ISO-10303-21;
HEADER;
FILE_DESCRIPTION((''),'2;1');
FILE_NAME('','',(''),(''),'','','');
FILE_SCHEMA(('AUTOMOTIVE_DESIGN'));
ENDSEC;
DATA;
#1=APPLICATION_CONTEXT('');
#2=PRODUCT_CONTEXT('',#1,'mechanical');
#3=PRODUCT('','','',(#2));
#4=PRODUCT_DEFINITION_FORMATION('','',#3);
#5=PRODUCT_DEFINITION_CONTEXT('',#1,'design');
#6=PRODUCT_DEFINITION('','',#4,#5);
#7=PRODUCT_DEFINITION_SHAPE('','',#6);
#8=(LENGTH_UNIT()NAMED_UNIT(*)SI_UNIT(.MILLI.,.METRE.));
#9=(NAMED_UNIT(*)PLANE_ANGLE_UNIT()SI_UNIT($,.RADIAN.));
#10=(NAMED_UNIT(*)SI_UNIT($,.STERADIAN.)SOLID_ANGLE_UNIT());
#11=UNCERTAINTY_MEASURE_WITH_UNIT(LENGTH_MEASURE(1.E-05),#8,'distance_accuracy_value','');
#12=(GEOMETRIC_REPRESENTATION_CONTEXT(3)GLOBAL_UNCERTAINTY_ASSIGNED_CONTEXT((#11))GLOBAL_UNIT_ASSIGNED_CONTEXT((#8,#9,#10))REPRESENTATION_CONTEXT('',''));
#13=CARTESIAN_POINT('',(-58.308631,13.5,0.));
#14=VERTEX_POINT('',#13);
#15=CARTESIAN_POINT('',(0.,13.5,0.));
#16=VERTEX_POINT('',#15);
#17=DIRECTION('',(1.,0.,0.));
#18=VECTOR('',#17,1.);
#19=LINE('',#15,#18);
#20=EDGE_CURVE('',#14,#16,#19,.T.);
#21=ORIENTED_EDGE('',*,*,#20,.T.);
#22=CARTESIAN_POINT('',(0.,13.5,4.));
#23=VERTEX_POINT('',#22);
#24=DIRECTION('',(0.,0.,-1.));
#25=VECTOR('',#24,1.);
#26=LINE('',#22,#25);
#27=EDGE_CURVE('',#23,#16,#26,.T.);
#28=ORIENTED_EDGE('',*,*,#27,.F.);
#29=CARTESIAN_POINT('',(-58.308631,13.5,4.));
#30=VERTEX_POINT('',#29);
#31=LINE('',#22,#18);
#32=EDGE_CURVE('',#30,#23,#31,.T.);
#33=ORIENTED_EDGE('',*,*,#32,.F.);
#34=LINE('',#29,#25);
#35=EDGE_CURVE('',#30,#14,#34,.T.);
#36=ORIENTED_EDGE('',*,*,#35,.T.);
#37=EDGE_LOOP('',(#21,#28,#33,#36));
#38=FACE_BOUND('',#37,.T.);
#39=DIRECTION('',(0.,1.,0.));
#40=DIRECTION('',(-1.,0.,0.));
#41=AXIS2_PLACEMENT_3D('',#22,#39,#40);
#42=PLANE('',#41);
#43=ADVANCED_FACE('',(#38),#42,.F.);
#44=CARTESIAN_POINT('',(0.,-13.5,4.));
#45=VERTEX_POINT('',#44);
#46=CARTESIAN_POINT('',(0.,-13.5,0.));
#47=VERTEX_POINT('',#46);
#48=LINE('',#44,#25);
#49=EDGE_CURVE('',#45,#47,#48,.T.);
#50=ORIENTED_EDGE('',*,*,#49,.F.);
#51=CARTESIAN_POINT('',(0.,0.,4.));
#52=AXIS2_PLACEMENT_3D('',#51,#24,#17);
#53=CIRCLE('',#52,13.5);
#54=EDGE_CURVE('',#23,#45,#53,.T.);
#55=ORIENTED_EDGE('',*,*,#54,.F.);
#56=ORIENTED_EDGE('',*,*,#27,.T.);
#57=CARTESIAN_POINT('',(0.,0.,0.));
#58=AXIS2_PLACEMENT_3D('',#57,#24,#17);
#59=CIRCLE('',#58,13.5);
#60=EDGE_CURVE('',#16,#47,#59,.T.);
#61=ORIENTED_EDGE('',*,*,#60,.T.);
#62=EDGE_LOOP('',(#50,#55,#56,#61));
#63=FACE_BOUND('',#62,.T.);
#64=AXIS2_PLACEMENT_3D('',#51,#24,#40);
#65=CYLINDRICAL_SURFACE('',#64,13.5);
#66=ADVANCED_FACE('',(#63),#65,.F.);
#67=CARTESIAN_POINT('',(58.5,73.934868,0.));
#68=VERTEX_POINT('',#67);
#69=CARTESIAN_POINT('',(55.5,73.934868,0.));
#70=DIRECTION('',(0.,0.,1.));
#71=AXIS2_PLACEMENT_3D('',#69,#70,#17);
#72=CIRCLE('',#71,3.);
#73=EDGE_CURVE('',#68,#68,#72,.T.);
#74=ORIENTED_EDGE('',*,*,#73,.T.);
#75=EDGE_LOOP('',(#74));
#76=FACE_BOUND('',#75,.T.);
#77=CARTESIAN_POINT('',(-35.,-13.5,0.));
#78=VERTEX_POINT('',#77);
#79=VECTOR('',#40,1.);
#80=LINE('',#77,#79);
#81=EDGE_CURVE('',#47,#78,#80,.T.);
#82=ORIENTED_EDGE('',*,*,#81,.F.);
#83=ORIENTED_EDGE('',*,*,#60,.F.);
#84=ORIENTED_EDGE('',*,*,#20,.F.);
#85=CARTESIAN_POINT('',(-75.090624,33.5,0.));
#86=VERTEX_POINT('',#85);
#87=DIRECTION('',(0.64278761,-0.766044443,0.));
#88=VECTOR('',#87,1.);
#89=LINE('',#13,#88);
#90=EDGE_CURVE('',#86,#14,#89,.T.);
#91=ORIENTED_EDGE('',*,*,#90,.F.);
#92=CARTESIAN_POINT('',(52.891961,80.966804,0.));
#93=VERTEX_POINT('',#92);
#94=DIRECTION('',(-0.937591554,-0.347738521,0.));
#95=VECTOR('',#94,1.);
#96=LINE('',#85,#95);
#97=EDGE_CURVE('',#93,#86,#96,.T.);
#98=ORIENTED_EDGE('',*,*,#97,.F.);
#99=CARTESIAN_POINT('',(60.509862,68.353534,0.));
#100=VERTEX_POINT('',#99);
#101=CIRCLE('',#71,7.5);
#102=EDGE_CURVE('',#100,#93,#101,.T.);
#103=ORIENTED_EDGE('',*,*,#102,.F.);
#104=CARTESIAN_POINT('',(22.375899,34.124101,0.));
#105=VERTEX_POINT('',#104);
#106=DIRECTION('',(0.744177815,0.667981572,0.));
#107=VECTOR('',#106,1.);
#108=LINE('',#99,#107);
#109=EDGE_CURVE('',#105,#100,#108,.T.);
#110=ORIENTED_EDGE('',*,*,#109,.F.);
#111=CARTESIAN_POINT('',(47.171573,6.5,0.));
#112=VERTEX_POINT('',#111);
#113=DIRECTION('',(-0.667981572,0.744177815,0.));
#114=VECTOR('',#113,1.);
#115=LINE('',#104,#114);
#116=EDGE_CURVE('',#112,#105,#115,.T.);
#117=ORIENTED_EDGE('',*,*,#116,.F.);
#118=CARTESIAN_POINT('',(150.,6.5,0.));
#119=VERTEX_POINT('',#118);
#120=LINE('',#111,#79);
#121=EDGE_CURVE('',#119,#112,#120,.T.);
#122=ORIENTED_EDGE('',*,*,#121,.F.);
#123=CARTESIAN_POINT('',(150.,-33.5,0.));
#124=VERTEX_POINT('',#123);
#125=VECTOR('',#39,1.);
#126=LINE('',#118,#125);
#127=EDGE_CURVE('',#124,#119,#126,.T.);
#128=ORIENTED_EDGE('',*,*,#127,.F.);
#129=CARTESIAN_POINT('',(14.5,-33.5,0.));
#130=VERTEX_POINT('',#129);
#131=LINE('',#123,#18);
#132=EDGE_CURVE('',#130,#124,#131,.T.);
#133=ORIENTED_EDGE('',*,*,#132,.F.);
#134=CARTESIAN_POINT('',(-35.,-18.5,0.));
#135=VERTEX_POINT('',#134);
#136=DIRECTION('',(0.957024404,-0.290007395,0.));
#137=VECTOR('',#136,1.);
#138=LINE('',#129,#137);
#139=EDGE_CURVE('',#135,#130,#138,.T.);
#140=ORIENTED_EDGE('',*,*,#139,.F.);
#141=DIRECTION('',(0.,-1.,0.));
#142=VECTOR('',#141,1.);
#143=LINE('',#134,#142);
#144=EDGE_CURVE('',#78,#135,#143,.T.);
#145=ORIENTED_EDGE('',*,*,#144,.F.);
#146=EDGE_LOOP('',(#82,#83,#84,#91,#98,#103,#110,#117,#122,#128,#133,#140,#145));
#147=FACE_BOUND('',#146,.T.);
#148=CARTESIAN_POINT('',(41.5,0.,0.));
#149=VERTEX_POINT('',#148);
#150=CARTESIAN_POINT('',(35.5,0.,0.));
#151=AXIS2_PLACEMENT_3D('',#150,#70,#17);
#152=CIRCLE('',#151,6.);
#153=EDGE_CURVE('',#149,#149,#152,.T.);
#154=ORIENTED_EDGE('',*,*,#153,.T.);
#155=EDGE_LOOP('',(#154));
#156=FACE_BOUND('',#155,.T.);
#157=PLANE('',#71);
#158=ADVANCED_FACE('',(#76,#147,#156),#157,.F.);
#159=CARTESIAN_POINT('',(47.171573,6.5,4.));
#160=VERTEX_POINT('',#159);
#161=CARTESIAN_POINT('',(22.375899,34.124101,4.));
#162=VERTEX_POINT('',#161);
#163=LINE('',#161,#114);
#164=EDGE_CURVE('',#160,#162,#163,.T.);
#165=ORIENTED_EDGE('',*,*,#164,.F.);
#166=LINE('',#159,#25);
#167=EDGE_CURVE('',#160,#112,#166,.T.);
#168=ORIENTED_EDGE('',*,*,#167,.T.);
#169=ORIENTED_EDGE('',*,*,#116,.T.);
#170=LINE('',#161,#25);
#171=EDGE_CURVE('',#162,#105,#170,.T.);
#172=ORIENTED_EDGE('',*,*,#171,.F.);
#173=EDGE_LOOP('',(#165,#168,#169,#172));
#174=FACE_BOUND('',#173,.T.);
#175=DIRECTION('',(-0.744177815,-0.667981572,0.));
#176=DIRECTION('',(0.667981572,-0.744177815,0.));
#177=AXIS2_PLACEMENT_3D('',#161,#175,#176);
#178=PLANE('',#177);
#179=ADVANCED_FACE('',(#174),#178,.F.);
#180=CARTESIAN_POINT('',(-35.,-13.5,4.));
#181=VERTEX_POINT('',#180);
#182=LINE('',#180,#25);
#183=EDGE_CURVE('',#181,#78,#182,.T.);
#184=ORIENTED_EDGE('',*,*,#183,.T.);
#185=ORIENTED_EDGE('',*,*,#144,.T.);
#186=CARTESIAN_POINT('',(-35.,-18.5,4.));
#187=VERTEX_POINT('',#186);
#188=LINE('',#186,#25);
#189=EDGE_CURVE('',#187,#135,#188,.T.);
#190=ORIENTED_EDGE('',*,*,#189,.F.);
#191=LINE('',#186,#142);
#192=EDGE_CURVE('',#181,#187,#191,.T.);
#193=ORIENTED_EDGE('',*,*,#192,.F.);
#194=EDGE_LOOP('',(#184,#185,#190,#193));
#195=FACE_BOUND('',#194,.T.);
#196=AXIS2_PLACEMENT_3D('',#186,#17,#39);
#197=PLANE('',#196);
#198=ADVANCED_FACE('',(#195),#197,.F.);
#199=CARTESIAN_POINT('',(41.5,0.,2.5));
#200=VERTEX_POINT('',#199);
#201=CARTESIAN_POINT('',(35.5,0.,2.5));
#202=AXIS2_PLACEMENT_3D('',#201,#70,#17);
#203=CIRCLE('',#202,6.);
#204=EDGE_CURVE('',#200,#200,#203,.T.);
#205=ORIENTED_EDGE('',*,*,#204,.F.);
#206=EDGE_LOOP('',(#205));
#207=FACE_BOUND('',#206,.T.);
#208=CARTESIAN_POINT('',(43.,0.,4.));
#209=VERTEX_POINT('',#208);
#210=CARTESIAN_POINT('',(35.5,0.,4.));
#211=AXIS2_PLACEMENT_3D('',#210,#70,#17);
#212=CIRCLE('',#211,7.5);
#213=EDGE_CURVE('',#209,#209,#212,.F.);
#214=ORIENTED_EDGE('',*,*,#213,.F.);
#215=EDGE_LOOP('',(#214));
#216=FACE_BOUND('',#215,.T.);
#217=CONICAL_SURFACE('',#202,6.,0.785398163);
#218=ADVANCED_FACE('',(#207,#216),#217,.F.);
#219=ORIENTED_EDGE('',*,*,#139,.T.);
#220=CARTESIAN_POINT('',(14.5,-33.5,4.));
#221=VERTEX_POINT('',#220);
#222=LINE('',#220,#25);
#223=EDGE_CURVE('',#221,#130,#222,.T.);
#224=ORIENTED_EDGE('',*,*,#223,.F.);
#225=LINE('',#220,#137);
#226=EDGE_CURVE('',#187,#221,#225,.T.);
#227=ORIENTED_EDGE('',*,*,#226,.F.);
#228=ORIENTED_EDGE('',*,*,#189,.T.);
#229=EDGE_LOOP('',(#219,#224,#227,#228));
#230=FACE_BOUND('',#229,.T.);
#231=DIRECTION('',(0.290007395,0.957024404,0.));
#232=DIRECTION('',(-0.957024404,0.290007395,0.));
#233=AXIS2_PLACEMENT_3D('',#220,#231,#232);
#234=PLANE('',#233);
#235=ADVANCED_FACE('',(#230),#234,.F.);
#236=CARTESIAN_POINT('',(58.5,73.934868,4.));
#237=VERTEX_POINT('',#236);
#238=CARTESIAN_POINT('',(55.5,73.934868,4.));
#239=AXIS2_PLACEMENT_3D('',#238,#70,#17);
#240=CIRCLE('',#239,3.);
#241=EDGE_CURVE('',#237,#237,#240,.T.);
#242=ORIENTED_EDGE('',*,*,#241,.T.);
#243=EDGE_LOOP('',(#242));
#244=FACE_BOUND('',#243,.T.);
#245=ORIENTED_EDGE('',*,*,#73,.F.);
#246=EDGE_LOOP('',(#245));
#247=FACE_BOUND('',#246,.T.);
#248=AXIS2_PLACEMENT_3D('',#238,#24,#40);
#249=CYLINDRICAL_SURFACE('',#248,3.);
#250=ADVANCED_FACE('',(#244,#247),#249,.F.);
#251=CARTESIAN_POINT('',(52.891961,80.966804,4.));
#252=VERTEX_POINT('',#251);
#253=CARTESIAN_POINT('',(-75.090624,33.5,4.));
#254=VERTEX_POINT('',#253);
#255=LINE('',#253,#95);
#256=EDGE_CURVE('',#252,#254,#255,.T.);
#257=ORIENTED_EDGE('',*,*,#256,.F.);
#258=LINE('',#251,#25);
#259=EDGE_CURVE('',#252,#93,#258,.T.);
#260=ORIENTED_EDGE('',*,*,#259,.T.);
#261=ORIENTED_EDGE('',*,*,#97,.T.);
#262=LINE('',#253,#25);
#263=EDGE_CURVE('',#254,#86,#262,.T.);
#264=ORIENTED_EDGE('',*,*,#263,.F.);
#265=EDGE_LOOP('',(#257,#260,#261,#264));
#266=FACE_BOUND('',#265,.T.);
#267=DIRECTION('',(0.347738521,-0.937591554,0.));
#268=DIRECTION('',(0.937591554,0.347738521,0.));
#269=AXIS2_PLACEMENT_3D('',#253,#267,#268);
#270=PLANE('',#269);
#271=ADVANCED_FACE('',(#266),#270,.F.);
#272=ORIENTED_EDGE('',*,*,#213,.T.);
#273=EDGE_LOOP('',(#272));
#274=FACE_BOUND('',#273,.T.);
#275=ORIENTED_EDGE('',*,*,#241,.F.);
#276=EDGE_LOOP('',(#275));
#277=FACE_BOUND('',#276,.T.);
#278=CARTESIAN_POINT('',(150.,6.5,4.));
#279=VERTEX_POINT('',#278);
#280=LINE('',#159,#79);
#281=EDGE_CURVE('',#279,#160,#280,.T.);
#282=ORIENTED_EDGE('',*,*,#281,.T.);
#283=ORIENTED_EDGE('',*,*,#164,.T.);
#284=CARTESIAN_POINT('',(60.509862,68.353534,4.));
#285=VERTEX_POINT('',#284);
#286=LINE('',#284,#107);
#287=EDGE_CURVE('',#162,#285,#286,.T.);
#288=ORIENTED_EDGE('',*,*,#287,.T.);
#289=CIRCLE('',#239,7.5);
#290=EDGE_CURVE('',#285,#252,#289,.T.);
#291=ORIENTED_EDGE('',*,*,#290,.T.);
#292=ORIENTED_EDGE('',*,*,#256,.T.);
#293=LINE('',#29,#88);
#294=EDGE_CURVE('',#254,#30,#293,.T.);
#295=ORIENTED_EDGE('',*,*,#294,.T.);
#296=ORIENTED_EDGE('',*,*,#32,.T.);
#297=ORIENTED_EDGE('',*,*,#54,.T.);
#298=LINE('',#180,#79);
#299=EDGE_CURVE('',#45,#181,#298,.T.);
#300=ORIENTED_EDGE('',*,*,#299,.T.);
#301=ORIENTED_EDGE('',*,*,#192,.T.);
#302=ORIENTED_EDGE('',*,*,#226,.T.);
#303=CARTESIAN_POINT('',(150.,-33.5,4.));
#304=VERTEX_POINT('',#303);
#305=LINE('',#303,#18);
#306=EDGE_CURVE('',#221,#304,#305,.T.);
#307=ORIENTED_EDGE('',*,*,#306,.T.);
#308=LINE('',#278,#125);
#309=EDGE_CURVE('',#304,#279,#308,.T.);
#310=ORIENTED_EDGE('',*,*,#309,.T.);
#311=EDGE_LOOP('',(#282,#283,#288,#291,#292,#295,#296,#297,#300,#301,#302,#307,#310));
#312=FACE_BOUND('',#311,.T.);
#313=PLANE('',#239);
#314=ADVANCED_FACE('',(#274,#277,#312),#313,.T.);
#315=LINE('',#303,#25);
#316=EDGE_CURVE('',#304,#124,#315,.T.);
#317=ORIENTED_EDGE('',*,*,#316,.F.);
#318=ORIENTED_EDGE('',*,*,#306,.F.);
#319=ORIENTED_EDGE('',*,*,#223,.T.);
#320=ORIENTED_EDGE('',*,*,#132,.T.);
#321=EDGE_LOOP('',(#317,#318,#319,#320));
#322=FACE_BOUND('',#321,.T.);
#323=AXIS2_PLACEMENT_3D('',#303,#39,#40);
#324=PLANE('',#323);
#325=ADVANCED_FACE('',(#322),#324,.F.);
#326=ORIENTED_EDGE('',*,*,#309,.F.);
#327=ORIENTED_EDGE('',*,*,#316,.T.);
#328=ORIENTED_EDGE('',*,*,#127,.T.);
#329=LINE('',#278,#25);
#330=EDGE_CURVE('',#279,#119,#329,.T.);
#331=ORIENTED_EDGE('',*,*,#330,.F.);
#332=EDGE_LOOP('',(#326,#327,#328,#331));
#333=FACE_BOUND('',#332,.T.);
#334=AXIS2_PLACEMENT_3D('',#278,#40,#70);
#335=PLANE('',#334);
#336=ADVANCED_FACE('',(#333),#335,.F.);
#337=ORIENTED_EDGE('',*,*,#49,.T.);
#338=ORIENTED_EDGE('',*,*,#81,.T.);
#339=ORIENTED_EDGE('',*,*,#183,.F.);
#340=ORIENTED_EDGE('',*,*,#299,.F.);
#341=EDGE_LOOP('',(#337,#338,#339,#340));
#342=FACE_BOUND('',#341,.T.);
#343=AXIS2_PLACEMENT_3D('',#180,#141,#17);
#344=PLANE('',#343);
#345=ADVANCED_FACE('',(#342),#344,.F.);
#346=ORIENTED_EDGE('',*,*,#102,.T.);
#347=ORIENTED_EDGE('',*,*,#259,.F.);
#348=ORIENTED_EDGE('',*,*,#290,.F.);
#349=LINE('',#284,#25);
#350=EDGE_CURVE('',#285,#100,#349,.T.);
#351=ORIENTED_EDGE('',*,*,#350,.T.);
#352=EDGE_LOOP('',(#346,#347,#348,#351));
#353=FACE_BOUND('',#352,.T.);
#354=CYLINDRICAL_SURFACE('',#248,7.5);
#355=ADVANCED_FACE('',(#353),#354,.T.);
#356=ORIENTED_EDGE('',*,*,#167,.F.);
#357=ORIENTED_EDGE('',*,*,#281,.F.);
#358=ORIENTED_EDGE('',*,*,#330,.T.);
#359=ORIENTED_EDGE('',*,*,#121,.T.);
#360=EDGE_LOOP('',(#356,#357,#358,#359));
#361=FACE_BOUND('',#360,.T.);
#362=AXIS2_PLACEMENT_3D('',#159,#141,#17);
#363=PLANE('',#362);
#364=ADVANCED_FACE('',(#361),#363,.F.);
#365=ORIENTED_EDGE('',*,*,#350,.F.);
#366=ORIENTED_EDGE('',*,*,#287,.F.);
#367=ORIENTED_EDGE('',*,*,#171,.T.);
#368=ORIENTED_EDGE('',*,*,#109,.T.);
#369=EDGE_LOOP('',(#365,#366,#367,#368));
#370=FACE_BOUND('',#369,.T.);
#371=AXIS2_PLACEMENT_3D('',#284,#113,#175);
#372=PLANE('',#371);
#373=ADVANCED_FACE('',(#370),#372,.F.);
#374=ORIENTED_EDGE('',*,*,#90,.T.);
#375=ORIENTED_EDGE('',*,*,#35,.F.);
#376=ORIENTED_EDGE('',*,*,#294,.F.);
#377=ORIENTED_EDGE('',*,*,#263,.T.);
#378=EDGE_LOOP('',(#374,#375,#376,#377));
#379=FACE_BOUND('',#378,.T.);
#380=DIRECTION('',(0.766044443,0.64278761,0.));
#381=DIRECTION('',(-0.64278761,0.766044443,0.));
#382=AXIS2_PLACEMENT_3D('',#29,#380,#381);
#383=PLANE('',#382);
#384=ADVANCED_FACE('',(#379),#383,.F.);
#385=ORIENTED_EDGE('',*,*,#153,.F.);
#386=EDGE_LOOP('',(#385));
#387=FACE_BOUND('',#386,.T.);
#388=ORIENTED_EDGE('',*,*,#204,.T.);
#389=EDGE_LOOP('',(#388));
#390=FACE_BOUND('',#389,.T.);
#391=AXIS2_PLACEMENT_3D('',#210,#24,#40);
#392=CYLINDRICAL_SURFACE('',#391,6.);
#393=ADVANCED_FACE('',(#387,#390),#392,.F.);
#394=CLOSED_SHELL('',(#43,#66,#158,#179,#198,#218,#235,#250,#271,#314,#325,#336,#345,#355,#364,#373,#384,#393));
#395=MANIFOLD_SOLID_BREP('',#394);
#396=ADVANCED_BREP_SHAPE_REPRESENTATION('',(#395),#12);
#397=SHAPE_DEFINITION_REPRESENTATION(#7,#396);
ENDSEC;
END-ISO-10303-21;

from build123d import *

# Parameters (mm, degrees)
SKETCH_1_R             = 3
SKETCH_1_R_2           = 6
SM_BASE_FLANGE_1_DEPTH = 4
CHAMFER_2_SIZE         = 1.5


# Sheet-metal steps are written as plain solids
with BuildPart() as part:
    # Sketch 1 → Базовая кромка1 (new body)
    with BuildSketch(Plane.XY):
        with BuildLine():
            Line((60.509861789, 68.353533944), (22.375898858, 34.12410114))
            Line((22.375898858, 34.12410114), (47.171572875, 6.5))
            Line((47.171572875, 6.5), (150, 6.5))
            Line((150, 6.5), (150, -33.5))
            Line((150, -33.5), (14.5, -33.5))
            Line((14.5, -33.5), (-35, -18.5))
            Line((-35, -18.5), (-35, -13.5))
            Line((-35, -13.5), (0, -13.5))
            ThreePointArc((0, -13.5), (13.5, 0), (0, 13.5))
            Line((0, 13.5), (-58.308631084, 13.5))
            Line((-58.308631084, 13.5), (-75.090623708, 33.5))
            Line((-75.090623708, 33.5), (52.891961096, 80.966804205))
            ThreePointArc((52.891961096, 80.966804205), (61.919955994, 77.812259079), (60.509861789, 68.353533944))
        make_face()
        with Locations((55.5, 73.934867553)):
            Circle(SKETCH_1_R, mode=Mode.SUBTRACT)
        with Locations((35.5, 0)):
            Circle(SKETCH_1_R_2, mode=Mode.SUBTRACT)
    extrude(amount=SM_BASE_FLANGE_1_DEPTH)

    # Фаска2
    chamfer_2_edges = [part.edges().sort_by_distance(p)[0] for p in [
        (29.5, 0, 4),
    ]]
    chamfer(chamfer_2_edges, length=CHAMFER_2_SIZE)


solid = part.part
